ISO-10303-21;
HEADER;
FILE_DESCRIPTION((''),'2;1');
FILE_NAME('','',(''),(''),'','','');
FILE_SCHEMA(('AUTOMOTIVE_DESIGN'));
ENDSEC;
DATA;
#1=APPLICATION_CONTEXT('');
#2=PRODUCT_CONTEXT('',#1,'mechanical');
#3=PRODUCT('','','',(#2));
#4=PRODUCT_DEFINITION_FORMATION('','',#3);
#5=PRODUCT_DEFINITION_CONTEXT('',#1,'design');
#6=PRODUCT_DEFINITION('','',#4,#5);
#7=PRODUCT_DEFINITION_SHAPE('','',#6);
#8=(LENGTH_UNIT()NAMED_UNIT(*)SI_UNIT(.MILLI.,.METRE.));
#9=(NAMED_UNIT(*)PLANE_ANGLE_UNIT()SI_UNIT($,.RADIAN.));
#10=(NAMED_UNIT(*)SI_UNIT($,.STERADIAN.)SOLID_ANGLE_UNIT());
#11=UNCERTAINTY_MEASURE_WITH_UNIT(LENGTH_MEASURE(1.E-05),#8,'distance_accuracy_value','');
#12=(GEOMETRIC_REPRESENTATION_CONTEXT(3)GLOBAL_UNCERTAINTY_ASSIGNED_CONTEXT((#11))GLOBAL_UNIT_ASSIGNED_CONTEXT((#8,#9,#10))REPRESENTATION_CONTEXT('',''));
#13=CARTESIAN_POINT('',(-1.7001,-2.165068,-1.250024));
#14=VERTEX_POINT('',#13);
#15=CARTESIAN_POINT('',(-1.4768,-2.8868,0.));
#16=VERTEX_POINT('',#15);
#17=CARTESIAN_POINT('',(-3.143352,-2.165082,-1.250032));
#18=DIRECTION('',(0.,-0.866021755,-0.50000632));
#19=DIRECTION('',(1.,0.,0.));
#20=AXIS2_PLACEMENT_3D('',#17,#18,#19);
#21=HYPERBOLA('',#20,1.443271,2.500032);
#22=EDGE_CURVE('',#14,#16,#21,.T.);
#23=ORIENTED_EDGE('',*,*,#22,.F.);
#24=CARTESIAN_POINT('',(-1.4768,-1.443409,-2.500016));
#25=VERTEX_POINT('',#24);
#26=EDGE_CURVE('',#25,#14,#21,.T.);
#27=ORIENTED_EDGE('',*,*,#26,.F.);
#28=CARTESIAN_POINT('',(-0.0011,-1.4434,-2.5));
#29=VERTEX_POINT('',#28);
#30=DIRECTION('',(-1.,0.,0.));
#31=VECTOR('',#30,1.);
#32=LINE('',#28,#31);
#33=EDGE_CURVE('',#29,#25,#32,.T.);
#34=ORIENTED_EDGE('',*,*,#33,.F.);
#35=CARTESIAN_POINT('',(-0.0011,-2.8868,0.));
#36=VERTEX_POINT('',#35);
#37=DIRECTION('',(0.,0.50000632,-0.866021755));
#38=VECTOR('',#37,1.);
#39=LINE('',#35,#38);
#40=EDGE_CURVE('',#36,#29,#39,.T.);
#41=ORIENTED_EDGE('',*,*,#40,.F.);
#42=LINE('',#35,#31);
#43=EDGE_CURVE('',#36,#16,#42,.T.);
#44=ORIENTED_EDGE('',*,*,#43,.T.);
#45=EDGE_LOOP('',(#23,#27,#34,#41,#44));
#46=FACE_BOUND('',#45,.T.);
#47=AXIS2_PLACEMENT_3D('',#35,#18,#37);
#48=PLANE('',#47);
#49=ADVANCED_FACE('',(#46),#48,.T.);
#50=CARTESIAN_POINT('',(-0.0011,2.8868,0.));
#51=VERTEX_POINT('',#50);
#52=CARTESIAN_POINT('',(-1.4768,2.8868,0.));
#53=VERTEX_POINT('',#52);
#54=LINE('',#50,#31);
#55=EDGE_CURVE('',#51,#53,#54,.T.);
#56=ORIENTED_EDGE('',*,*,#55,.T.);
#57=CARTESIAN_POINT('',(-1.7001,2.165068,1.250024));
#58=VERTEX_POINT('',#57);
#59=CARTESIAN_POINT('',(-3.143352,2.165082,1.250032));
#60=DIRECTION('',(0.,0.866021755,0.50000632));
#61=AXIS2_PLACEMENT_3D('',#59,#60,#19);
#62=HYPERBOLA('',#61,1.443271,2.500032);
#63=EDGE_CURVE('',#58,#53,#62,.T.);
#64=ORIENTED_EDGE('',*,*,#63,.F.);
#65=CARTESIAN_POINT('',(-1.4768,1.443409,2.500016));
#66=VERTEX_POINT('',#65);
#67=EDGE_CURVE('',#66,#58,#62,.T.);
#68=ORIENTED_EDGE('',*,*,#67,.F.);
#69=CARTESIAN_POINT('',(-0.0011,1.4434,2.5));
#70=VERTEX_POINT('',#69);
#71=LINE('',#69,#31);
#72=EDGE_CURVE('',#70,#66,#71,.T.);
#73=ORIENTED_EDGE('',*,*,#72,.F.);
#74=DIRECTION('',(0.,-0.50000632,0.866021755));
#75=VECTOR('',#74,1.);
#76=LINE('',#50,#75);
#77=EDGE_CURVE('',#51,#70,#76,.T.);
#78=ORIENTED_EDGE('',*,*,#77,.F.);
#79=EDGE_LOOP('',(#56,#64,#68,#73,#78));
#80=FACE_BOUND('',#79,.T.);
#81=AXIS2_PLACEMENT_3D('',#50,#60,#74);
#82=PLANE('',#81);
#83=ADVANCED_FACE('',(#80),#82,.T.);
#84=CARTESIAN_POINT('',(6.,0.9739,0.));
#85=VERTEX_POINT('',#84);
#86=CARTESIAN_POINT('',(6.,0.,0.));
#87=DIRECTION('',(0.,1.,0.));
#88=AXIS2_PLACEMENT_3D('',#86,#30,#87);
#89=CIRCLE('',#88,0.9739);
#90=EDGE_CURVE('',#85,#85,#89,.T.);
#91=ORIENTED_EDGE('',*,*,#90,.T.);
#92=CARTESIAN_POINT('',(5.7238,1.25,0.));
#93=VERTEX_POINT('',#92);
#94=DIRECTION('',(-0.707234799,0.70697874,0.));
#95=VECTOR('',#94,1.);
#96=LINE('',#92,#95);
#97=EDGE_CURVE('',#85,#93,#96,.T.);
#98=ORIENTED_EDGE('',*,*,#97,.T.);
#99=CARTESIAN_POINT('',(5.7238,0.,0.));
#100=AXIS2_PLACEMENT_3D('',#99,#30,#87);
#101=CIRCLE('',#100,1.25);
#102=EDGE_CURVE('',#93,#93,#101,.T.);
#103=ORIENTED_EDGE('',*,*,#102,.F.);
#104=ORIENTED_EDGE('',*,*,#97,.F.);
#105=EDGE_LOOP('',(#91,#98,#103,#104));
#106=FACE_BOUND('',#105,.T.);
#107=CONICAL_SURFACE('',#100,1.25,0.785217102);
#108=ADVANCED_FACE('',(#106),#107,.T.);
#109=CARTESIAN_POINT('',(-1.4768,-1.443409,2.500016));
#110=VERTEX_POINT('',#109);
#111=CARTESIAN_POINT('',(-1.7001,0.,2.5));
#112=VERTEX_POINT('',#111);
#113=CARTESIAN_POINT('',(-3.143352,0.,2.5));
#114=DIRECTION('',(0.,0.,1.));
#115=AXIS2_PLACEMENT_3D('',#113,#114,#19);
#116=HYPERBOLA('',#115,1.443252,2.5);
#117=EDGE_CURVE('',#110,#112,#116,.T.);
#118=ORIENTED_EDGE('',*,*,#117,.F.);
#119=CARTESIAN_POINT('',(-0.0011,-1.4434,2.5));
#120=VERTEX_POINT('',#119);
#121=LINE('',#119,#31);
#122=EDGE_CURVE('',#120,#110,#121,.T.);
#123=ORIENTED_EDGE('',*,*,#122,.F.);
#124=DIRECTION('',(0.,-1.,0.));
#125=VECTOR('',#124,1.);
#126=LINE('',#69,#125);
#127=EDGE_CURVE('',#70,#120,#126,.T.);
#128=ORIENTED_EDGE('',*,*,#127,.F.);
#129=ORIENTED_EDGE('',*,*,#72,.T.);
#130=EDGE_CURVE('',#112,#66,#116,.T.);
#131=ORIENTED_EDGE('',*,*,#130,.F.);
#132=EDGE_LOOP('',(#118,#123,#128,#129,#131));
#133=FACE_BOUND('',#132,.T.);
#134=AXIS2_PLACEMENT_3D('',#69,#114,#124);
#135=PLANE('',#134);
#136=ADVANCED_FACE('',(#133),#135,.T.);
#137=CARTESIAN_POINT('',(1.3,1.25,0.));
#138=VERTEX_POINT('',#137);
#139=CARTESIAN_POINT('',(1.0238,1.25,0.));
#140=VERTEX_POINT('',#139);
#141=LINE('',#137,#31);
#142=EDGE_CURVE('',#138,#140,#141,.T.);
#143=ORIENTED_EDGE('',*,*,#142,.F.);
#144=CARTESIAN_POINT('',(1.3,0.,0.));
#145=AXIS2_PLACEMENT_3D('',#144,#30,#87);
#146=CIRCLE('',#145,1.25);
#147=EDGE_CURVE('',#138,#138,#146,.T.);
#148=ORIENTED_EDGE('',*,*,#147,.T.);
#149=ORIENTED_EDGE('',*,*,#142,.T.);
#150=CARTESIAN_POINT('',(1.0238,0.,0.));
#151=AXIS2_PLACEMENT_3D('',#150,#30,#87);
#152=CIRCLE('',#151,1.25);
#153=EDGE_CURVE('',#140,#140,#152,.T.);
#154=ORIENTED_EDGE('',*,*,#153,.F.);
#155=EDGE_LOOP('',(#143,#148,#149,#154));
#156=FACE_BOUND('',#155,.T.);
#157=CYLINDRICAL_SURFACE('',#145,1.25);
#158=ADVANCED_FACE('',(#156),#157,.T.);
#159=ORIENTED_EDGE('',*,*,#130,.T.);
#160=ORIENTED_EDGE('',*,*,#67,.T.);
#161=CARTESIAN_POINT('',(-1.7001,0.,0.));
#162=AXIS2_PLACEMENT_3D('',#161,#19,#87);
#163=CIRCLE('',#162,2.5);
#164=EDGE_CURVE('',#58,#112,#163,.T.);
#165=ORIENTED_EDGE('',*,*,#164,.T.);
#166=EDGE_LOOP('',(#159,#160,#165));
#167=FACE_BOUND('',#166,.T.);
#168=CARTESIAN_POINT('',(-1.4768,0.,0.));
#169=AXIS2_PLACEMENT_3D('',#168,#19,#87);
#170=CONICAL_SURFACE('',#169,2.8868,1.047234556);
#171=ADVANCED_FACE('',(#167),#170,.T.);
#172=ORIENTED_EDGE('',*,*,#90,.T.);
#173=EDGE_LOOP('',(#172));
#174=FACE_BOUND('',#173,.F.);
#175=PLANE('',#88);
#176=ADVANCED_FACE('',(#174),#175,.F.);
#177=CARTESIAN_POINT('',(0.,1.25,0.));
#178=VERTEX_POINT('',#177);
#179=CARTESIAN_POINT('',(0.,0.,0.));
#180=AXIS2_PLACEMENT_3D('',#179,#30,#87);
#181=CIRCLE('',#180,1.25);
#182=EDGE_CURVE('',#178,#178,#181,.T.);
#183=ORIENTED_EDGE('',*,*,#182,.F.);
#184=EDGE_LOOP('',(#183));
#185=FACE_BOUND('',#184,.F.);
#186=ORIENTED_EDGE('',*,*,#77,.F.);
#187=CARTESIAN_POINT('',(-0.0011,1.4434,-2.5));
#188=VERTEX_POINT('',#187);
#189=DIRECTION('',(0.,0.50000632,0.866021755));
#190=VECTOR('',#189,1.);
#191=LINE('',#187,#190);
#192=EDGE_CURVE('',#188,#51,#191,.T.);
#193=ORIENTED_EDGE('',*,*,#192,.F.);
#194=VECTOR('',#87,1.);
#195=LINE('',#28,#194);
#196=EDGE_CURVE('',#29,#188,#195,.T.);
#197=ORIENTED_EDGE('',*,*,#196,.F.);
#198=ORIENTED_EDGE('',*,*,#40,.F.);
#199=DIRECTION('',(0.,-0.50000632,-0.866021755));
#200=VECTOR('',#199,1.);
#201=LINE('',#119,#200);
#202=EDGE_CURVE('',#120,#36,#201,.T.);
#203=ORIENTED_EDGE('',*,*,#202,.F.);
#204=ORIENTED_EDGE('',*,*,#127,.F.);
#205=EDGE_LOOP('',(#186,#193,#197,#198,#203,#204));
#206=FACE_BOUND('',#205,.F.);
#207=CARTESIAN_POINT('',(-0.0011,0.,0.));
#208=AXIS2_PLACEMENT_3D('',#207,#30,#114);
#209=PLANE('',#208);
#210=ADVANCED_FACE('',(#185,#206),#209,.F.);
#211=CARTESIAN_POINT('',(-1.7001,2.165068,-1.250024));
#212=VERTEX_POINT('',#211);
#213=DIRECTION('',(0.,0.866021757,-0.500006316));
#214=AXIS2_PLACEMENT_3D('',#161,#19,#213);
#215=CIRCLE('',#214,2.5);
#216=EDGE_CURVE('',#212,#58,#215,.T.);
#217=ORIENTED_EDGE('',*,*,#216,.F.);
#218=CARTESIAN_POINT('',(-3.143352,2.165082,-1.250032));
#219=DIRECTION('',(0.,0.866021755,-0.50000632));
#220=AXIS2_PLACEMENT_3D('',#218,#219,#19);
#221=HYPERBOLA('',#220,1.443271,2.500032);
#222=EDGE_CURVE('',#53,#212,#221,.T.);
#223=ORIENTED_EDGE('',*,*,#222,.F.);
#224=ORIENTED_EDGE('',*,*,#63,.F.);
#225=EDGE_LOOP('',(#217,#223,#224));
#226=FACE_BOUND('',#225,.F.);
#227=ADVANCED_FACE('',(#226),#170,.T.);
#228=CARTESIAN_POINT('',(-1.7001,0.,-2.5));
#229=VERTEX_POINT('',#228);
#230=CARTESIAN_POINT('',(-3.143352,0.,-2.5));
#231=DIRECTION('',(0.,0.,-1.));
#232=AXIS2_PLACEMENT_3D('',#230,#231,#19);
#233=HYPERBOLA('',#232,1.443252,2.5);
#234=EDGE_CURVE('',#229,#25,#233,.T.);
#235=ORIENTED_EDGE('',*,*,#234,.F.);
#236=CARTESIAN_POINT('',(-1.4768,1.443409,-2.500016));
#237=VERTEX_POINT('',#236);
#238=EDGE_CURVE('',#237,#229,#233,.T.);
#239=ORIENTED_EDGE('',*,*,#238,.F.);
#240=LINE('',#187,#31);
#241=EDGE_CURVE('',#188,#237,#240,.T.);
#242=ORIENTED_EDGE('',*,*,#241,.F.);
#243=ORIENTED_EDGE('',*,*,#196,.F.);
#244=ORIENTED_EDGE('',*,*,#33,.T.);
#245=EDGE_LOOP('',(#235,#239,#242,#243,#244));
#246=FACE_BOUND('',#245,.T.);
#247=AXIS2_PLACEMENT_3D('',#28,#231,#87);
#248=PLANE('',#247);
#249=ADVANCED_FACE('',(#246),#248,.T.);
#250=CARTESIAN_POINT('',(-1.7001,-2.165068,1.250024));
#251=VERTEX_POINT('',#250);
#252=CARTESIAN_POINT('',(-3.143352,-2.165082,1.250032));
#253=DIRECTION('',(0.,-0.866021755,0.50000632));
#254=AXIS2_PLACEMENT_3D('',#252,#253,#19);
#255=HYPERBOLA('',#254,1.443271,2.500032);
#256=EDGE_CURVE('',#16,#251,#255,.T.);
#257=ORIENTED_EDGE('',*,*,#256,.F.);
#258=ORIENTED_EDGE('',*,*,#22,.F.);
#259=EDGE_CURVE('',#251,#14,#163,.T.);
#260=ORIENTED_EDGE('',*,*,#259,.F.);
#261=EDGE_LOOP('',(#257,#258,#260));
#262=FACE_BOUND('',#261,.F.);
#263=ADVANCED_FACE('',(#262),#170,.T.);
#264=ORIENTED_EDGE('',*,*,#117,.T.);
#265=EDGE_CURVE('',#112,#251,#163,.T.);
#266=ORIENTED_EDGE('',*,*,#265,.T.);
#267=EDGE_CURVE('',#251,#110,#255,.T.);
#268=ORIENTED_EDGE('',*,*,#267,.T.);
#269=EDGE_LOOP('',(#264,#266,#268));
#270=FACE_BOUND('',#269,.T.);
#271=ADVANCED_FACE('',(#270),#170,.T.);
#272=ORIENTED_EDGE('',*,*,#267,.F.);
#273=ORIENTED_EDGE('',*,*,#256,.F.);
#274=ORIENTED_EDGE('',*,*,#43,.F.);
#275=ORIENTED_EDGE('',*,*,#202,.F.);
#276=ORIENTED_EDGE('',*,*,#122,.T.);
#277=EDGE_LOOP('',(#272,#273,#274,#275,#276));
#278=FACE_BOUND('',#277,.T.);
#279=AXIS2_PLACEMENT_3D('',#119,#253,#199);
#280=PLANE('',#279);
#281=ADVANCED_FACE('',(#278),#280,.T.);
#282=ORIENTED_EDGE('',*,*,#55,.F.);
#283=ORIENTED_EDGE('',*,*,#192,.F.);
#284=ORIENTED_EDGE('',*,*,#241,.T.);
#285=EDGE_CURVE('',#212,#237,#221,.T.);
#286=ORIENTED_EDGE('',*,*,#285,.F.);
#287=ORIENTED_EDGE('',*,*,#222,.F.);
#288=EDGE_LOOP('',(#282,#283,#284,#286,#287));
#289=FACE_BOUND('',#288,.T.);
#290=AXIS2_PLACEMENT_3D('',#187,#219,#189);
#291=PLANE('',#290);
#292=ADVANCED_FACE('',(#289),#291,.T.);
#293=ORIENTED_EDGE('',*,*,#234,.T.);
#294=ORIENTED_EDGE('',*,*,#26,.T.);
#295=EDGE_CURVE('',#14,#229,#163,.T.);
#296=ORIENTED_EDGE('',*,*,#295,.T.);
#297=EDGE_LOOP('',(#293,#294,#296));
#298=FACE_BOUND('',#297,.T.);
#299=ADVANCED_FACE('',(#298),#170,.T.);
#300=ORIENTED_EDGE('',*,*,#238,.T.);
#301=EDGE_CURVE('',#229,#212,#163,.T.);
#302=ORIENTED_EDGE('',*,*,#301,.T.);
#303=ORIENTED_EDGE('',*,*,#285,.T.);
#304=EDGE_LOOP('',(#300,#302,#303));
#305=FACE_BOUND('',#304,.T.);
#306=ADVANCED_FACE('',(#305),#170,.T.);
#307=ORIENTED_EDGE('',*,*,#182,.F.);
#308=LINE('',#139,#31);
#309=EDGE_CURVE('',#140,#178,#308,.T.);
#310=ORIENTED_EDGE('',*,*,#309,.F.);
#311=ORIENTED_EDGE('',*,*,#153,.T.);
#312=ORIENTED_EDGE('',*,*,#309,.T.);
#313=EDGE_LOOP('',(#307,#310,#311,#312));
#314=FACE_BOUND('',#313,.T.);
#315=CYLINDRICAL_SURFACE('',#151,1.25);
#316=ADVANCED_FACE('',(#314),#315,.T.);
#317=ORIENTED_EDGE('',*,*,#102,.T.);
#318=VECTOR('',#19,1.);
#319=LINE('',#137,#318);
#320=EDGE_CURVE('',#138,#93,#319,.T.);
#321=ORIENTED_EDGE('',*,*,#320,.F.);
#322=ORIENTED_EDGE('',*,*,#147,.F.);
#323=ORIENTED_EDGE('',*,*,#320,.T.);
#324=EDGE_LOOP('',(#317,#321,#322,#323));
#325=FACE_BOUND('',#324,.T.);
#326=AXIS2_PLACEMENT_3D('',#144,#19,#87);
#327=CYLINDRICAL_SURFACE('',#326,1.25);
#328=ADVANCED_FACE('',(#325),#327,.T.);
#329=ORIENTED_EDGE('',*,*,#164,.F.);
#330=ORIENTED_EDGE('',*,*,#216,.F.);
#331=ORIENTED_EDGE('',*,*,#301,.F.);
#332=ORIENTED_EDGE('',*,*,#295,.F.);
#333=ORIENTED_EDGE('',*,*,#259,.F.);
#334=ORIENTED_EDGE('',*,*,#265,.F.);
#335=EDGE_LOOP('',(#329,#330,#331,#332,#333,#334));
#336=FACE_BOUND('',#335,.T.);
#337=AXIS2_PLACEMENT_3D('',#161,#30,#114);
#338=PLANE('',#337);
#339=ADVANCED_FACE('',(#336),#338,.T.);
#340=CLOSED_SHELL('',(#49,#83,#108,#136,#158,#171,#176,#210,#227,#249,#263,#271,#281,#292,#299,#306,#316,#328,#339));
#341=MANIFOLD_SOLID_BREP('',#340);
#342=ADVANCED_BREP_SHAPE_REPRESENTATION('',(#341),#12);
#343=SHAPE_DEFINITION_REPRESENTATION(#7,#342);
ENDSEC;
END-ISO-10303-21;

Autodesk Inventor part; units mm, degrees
ref_plane "YZ Plane" through (0, 0, 0) normal (1, 0, 0) x (0, 1, 0)
ref_plane "XZ Plane" through (0, 0, 0) normal (0, 1, 0) x (-1, 0, 0)
sketch "Boceto1" plane through (0, 0, 0) normal (0, 0, 1) x (1, 0, 0)
  line L0 (0, 2.5) -> (0, 1.25)
  line L1 (1.3, 1.25) -> (6, 1.25)
  line L2 (6, 1.25) -> (6, 0)
  line L3 (6, 0) -> (-0.0011, 0)
  line L4 (-1.2013, 0) -> (7.2002, 0) projected
  line L5 (-0.0011, 0) -> (-0.0011, 2.5)
  line L6 (-0.0011, 2.5) -> (0, 2.5)
  line L7 (1.3, 1.25) -> (1.0238, 1.25)
  line L8 (1.0238, 1.25) -> (0, 1.25)
  line L9 (0, -0.5) -> (0, 3) projected
  dimension "d0" = 6
  dimension "d1" = 4.7
  dimension "d2" = 2.5
  dimension "d9" = 0.0011
  dimension "d10" = 5
  dimension "d13" = 0.2762
  dimension "d14" = 2.5
revolve "Cuerpo" add sketch "Boceto1" angle 360 about axis through (6, 0, 0) along (-1, 0, 0)
sketch "Boceto2" plane through (-0.0011, 0, 0) normal (-1, 0, 0) x (0, 0, 1)
  line L0 (0, 2.8868) -> (2.5, 1.4434)
  line L1 (2.5, 1.4434) -> (2.5, -1.4434)
  line L2 (2.5, -1.4434) -> (0, -2.8868)
  line L3 (0, -2.8868) -> (-2.5, -1.4434)
  line L4 (-2.5, -1.4434) -> (-2.5, 1.4434)
  line L5 (-2.5, 1.4434) -> (0, 2.8868)
  point P0 (0, 0)
  point P1 (0, 0)
  dimension "d11" = 5
extrude "Cabeza" add sketch "Boceto2" along normal blind 1.699
sketch "Boceto4" plane through (0, 0, 0) normal (0, 0, 1) x (1, 0, 0)
  line L0 (-1.7001, 2.5) -> (-1.7001, 2.8868)
  line L1 (-1.7001, 2.8868) -> (-1.4768, 2.8868)
  line L2 (-1.4768, 2.8868) -> (-1.7001, 2.5)
  line L3 (-2.0399, 0) -> (0.3387, 0) projected
  line L4 (-0.0011, 2.8868) -> (-1.7001, 2.8868) projected
  line L5 (-1.7001, 1.4434) -> (-1.7001, 2.8868) projected
  dimension "d5" = 30
  dimension "d19" = 5
revolve "Chaflán1" cut sketch "Boceto4" angle 360 about axis through (-10, 0, 0) along (1, 0, 0)
thread "Rosca" size "M2.5x0.45" class "6g" standard "ISO Metric profile" length 4.7
chamfer "Chaflán2" distance 0.2761 distance2 0.2762 1 edges at (6, -1.25, 0) measured on face at (6, -0.3871, 0.3429)
ref_plane "Work Plane1" through (1.525, 0, 0) normal (0, 0, 1) x (1, 0, 0)
equation "\"d0\" = NLG"
equation "\"d1\" = GEL"
equation "\"d2\" = GD"
equation "\"d10\" = SD2"
equation "\"d14\" = BDM"
equation "\"d11\" = SW"
equation "\"d3\" = KOH - SD"
equation "\"d5\" = ANG1"
equation "\"d19\" = SW0"
equation "\"d15\" = GEL"
equation "\"d6\" = -0.5 * SPD + 0.5 * GD"
equation "\"NLG\" = 6"
equation "\"GD\" = NND"
equation "\"BDM\" = NND"
equation "\"KOH\" = 1.7"
equation "\"GEL\" = 4.7"
equation "\"SW\" = 5"
equation "\"SW0\" = SW"
equation "\"SPD\" = NND - 1.2269 * PTC"
equation "\"SD2\" = SW"
equation "\"SD\" = 0.001"
equation "\"ANG1\" = 30deg"
equation "\"GAL\" = 0.61345 * PTC"
equation "\"GUL\" = 0.61345 * PTC"
equation "\"RR\" = 0.001"
equation "\"WFT\" = SD"
equation "\"GD1\" = THREADDIA - 1.2269 * PTC"
equation "\"THREADDIA\" = 2.5"
equation "\"SDH\" = SW"
equation "\"TOA\" = 30deg"
equation "\"FAWI\" = 45deg"
equation "\"PTC\" = 0.45"
equation "\"NND\" = 2.5"
equation "\"E0\" = 1.155 * SW"
properties part number "AS 1110 - M2,5 x 6" material "Acero, suave"
